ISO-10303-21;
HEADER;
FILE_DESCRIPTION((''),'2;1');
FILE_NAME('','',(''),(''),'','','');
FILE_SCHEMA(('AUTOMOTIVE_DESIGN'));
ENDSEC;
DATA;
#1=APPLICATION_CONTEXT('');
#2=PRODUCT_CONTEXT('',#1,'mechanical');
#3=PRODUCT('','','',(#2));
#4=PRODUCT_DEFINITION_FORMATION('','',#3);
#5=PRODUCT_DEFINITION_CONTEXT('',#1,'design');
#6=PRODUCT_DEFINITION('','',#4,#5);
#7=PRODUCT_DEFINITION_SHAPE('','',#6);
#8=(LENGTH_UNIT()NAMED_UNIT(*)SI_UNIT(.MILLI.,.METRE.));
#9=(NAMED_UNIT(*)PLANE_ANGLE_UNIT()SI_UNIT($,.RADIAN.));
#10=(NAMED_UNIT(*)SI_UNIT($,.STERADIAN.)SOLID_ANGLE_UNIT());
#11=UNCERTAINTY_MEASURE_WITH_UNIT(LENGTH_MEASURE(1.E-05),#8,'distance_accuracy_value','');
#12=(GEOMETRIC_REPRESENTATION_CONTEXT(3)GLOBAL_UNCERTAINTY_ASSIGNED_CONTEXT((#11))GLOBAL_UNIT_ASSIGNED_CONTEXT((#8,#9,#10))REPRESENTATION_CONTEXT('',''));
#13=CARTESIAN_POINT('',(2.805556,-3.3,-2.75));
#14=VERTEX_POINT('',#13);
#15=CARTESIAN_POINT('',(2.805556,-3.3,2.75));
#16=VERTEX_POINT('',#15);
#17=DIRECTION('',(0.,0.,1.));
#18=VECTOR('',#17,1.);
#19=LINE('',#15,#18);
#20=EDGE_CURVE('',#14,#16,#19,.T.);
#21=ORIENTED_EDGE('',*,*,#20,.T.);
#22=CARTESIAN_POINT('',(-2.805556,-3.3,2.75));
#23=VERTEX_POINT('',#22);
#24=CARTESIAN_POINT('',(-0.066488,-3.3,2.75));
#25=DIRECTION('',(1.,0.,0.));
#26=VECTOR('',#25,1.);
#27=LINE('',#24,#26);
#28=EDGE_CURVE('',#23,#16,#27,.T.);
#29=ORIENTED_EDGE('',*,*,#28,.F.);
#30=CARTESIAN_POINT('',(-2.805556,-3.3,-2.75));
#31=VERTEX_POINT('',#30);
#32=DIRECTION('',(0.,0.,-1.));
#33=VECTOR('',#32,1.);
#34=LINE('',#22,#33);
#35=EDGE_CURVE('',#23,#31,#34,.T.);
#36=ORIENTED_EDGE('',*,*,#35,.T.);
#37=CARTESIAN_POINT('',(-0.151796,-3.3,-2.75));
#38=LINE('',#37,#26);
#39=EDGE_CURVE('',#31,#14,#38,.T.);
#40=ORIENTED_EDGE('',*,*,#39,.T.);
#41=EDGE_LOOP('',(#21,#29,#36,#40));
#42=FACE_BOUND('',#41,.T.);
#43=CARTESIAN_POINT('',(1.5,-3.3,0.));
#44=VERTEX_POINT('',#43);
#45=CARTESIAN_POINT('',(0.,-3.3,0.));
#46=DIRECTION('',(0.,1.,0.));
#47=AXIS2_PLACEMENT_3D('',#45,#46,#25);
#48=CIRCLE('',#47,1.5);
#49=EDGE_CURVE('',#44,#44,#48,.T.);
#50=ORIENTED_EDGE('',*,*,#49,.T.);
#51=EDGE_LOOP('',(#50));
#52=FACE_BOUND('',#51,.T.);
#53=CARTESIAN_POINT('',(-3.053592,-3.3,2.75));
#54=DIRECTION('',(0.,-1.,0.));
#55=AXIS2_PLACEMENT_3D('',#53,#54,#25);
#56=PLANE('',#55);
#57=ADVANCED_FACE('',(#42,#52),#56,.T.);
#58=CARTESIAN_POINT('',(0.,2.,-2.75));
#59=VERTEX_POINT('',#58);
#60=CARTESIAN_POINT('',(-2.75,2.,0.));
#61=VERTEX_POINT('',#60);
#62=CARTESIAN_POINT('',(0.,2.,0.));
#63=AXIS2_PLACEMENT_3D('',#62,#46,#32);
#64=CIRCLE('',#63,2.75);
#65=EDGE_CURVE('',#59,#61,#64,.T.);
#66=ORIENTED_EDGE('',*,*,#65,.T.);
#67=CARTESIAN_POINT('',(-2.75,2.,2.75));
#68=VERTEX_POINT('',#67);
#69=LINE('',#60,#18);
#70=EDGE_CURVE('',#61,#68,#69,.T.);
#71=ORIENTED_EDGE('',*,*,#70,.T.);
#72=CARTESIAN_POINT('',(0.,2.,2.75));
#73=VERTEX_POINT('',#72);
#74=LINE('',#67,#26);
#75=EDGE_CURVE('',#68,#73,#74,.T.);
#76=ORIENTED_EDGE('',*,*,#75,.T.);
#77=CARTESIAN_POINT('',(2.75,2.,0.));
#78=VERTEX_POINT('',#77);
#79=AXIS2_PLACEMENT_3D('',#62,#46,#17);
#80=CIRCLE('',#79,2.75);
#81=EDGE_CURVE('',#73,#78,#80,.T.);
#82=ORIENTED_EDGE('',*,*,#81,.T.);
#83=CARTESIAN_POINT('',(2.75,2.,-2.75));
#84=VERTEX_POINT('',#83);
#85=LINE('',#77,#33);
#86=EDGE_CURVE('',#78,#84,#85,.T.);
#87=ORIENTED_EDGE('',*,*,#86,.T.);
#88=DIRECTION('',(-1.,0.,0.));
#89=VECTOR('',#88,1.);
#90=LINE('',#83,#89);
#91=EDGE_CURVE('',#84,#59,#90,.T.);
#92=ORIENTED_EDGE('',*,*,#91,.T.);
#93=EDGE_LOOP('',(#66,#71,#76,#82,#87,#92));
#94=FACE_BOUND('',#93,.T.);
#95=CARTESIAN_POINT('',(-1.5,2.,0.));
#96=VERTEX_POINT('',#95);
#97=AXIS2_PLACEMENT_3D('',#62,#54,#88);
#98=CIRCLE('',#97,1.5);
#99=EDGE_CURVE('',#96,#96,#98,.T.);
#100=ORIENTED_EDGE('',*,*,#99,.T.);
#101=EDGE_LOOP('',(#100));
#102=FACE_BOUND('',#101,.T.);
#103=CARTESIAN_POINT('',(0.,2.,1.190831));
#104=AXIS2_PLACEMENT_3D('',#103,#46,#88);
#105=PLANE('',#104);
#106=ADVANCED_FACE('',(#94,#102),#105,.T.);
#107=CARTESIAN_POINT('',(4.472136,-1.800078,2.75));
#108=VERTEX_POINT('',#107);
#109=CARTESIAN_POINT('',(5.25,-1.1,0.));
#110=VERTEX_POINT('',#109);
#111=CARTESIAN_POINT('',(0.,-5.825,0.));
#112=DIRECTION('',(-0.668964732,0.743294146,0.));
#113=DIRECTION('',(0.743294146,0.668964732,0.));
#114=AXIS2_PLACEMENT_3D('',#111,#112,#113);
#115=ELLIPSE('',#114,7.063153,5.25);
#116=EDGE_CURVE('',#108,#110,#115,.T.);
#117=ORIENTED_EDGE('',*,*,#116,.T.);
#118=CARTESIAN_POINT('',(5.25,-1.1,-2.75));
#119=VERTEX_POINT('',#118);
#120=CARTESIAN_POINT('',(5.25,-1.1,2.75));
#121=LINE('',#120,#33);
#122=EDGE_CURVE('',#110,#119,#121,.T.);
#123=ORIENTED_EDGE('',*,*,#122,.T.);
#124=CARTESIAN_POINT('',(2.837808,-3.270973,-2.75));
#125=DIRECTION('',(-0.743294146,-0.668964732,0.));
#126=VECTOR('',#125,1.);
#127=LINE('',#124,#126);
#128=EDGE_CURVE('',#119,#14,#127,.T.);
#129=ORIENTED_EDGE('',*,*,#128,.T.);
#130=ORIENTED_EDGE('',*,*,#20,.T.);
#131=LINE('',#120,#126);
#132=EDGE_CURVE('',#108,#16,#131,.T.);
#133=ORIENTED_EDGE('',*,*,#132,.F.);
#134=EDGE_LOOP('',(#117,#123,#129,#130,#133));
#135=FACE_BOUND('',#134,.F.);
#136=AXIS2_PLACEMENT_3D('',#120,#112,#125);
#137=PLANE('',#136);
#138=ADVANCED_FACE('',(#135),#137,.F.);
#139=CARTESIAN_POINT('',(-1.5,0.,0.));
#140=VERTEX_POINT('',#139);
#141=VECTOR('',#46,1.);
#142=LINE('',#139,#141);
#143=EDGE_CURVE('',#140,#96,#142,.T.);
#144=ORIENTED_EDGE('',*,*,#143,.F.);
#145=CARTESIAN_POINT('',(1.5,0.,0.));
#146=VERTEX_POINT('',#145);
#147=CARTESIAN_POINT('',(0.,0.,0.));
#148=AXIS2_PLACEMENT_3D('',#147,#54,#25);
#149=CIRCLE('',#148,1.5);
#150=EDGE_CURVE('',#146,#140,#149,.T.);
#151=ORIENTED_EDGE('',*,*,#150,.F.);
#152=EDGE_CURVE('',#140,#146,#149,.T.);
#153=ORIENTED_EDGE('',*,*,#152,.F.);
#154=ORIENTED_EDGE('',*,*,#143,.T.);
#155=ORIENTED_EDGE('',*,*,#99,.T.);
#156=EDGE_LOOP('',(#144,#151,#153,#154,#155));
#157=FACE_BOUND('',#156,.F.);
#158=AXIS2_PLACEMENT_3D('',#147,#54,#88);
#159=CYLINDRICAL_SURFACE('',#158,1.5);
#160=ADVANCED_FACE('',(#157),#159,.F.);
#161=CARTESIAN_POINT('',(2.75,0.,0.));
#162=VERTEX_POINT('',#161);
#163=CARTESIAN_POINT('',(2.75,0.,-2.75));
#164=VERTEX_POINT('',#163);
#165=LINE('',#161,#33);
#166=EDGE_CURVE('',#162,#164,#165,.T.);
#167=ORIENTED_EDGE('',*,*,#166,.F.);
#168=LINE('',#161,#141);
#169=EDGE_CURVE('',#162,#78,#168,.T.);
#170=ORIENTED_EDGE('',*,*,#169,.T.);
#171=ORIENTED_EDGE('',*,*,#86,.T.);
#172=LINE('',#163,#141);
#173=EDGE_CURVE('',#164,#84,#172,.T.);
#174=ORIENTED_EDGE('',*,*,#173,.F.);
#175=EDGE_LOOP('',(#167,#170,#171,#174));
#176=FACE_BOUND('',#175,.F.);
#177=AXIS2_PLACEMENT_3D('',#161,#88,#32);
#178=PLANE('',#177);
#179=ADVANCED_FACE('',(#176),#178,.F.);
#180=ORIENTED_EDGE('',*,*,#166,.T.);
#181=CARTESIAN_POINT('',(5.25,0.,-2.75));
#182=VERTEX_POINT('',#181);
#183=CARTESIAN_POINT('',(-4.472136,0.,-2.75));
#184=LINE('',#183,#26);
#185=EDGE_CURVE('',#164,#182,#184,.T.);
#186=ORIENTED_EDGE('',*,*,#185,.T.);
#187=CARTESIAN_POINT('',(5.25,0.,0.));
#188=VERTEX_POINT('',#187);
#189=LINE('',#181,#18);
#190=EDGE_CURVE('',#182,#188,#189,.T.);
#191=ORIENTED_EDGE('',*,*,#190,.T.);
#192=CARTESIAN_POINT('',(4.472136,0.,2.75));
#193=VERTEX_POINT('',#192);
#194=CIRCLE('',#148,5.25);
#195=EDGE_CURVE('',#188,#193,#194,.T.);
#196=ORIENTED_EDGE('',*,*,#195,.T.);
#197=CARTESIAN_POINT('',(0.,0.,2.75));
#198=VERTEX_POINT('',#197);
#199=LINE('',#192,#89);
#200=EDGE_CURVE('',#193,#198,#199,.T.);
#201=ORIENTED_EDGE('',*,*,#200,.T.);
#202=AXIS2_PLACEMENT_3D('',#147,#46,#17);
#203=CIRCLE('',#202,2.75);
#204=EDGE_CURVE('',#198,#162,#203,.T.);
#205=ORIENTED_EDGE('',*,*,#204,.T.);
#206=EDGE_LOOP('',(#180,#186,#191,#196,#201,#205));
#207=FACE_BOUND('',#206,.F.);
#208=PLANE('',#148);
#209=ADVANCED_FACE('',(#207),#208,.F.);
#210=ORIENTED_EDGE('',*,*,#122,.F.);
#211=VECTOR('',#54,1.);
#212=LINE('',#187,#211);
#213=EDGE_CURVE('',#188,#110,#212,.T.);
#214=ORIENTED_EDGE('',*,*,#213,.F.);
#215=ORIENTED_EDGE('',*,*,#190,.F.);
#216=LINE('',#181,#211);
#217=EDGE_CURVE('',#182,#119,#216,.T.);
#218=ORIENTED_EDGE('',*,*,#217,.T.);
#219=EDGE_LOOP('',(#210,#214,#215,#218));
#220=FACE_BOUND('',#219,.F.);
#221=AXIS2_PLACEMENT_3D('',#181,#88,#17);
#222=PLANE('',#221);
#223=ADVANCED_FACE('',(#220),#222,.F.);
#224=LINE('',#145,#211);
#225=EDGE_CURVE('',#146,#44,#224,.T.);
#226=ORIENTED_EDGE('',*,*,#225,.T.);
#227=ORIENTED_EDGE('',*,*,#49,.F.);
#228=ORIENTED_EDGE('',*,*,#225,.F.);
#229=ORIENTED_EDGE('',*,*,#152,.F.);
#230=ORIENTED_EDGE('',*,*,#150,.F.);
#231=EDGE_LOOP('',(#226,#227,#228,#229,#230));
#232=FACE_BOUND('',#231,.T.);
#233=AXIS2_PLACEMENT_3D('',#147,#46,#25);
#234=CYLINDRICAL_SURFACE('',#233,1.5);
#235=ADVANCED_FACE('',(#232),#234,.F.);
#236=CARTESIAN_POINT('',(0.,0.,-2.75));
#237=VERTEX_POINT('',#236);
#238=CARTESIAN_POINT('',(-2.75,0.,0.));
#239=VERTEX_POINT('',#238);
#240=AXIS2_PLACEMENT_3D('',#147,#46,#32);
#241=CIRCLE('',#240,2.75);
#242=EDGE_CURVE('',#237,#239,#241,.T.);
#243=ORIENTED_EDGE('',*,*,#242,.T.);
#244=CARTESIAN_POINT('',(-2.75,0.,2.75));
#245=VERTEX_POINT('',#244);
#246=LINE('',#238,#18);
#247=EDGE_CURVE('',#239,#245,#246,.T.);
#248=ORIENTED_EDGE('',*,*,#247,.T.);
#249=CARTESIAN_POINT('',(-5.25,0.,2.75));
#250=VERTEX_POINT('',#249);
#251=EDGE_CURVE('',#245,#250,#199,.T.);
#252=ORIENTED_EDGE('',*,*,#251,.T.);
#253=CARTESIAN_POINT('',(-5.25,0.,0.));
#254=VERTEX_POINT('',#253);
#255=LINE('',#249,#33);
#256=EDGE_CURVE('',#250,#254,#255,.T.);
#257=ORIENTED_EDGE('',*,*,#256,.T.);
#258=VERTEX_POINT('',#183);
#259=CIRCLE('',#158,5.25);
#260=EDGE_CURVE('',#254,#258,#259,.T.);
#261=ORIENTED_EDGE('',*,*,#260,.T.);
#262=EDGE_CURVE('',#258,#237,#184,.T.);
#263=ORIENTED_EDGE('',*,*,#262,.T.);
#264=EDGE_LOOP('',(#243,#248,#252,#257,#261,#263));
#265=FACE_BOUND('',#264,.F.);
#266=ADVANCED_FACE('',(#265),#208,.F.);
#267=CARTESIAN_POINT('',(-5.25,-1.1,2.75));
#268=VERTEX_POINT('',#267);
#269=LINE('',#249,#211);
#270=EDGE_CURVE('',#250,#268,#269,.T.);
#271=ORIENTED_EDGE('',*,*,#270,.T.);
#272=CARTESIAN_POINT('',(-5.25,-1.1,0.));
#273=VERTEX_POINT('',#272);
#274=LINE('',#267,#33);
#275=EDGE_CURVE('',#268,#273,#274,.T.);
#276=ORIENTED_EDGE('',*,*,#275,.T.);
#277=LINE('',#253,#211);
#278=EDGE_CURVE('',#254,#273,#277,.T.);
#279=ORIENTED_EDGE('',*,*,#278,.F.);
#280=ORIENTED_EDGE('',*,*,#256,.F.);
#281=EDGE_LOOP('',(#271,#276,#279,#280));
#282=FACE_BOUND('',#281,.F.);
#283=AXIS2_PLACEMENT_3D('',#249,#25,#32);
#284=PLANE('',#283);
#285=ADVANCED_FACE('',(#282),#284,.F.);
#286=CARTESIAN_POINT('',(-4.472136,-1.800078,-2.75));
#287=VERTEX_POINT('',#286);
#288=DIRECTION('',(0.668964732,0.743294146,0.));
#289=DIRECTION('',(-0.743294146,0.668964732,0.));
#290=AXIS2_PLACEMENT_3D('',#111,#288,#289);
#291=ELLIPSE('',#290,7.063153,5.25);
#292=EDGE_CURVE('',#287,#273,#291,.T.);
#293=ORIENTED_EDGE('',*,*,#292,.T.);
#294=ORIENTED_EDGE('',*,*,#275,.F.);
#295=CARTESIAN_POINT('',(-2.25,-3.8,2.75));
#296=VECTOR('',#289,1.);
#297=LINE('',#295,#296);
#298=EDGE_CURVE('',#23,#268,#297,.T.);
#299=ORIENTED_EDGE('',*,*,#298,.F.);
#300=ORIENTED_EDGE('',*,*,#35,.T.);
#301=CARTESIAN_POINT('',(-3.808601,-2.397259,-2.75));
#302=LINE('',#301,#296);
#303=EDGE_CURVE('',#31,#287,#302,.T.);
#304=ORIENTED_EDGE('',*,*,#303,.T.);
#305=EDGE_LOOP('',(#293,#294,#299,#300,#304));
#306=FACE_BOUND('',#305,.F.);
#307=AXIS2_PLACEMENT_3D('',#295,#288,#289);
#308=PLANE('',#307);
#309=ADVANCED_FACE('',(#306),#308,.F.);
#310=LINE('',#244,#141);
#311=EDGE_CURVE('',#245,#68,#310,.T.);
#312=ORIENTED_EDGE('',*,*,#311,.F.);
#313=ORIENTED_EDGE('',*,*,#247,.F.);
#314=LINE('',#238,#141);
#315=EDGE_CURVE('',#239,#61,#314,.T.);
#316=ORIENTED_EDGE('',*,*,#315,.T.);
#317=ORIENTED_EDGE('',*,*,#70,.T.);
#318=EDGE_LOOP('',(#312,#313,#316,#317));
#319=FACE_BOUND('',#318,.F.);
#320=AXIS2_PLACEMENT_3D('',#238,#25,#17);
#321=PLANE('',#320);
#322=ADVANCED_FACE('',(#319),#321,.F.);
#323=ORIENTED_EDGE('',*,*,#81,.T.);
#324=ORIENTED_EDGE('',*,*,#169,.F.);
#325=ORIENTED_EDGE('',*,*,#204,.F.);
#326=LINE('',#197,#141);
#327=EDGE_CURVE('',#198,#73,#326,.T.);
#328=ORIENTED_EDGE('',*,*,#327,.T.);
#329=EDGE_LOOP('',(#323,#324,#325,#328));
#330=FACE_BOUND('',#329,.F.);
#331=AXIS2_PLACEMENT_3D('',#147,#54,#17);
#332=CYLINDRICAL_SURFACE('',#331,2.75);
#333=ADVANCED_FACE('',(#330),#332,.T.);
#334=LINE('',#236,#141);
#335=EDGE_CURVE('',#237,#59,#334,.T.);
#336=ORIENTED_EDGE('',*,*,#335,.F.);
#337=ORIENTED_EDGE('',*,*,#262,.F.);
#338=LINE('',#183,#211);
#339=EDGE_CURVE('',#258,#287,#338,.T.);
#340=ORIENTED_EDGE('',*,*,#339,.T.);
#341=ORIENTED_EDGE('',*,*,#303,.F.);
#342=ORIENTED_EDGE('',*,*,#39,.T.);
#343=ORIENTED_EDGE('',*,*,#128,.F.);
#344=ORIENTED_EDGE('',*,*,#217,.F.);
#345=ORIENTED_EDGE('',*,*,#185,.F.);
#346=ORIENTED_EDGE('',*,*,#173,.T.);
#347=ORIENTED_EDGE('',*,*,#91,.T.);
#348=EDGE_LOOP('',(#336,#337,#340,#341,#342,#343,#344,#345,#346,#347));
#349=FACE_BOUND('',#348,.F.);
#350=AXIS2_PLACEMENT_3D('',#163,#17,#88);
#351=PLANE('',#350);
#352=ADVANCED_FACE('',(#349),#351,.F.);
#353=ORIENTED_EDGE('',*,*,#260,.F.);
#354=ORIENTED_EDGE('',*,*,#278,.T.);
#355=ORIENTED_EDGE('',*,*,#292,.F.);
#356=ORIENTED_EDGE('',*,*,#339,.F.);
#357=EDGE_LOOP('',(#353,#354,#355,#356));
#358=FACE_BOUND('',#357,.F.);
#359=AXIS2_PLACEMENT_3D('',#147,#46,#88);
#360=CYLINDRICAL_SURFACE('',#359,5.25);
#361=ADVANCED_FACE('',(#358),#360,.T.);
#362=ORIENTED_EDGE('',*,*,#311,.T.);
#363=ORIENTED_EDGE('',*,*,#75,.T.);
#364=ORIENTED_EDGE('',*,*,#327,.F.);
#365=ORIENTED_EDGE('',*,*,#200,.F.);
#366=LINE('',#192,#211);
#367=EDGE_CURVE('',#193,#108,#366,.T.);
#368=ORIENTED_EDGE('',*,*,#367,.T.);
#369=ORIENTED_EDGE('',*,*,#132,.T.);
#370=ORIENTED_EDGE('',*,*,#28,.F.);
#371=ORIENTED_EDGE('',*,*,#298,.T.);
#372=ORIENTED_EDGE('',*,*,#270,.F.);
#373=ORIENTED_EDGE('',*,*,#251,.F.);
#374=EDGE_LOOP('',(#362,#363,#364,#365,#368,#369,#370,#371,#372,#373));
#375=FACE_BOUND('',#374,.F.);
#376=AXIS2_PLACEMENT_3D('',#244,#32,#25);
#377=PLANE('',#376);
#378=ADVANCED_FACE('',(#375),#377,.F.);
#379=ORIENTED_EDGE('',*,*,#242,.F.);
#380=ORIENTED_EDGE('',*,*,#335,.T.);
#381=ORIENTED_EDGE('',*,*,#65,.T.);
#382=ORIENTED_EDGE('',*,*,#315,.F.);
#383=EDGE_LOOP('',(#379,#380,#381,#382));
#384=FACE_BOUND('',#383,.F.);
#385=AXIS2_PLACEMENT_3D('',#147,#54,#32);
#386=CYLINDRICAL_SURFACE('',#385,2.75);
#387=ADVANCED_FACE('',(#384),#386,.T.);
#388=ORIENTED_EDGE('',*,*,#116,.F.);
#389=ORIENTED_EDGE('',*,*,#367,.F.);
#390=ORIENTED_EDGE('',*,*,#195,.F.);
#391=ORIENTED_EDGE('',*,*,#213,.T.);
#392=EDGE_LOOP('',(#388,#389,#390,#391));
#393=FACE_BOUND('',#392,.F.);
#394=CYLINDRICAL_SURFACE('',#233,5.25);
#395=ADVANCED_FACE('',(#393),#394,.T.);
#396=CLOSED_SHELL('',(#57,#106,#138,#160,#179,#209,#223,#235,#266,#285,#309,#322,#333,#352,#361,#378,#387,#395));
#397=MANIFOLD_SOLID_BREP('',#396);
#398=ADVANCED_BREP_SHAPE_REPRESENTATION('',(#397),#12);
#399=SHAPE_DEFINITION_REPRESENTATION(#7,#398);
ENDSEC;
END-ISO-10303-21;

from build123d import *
from build123d import SkipClean  # not in build123d's __all__

# Parameters (mm, degrees)
F0_R     = 1.5
F1_DEPTH = 3.8
F3_DEPTH = 2
F5_DEPTH = 25
F6_W     = 5.9742073228
F6_H     = 0.5
F7_DEPTH = 25


# Not quite as in the source:
# - after a boolean that leaves OpenCascade's solid faulty, fix() repairs it


with BuildPart() as f1:
    # F0 (on Front) → F1 (new body)
    with BuildSketch(Plane.XZ):
        with BuildLine():
            Line((-4.472135955, -2.75), (4.472135955, -2.75))
            ThreePointArc((4.472135955, -2.75), (5.0517924425, -1.4289482559), (5.25, 0))
            ThreePointArc((5.25, 0), (5.0517924425, 1.4289482559), (4.472135955, 2.75))
            Line((4.472135955, 2.75), (-4.472135955, 2.75))
            ThreePointArc((-4.472135955, 2.75), (-5.0517924425, 1.4289482559), (-5.25, 0))
            ThreePointArc((-5.25, 0), (-5.0517924425, -1.4289482559), (-4.472135955, -2.75))
        make_face()
        Circle(F0_R, mode=Mode.SUBTRACT)
        with BuildLine():
            Line((-5.25, 2.75), (-5.25, 0))
            ThreePointArc((-5.25, 0), (-5.0517924425, 1.4289482559), (-4.472135955, 2.75))
            Line((-4.472135955, 2.75), (-5.25, 2.75))
        make_face()
        with BuildLine():
            Line((4.472135955, -2.75), (5.25, -2.75))
            Line((5.25, -2.75), (5.25, 0))
            ThreePointArc((5.25, 0), (5.0517924425, -1.4289482559), (4.472135955, -2.75))
        make_face()
    extrude(amount=F1_DEPTH)

    # F2 (on face) → F3 (join)
    with BuildSketch(Plane(origin=(0, 0, 0), x_dir=(-1, 0, 0), z_dir=(0, 1, 0))):
        with BuildLine():
            Line((1.5, 0), (2.75, 0))
            ThreePointArc((2.75, 0), (1.9445436483, 1.9445436483), (0, 2.75))
            ThreePointArc((0, 2.75), (-1.9445436483, 1.9445436483), (-2.75, 0))
            Line((-2.75, 0), (-1.5, 0))
            ThreePointArc((-1.5, 0), (0, 1.5), (1.5, 0))
        make_face()
        with BuildLine():
            ThreePointArc((0, -2.75), (1.9445436483, -1.9445436483), (2.75, 0))
            Line((2.75, 0), (1.5, 0))
            ThreePointArc((1.5, 0), (0, -1.5), (-1.5, 0))
            Line((-1.5, 0), (-2.75, 0))
            ThreePointArc((-2.75, 0), (-1.9445436483, -1.9445436483), (0, -2.75))
        make_face()
        with BuildLine():
            ThreePointArc((0, 2.75), (1.9445436483, 1.9445436483), (2.75, 0))
            Line((2.75, 0), (2.75, 2.75))
            Line((2.75, 2.75), (0, 2.75))
        make_face()
        with BuildLine():
            Line((-2.75, -2.75), (0, -2.75))
            ThreePointArc((0, -2.75), (-1.9445436483, -1.9445436483), (-2.75, 0))
            Line((-2.75, 0), (-2.75, -2.75))
        make_face()
    with SkipClean():  # cleaning this boolean's faces spoils the solid; the shape is the same uncleaned
        extrude(amount=F3_DEPTH)

    # F4 (on face) → F5 (cut)
    with BuildSketch(Plane.XY.offset(2.75)):
        Polygon((-5.25, -1.1), (-5.25, -3.8), (-2.25, -3.8), align=None)
        Polygon((2.25, -3.8), (5.25, -3.8), (5.25, -1.1), align=None)
    extrude(amount=-F5_DEPTH, mode=Mode.SUBTRACT)

    add(f1.part.fix(), mode=Mode.REPLACE)

    # F6 (on face) → F7 (cut)
    with BuildSketch(Plane.XY.offset(2.75)):
        with Locations((-0.0664879346, -3.55)):
            Rectangle(F6_W, F6_H)
    extrude(amount=-F7_DEPTH, mode=Mode.SUBTRACT)


solid = f1.part
